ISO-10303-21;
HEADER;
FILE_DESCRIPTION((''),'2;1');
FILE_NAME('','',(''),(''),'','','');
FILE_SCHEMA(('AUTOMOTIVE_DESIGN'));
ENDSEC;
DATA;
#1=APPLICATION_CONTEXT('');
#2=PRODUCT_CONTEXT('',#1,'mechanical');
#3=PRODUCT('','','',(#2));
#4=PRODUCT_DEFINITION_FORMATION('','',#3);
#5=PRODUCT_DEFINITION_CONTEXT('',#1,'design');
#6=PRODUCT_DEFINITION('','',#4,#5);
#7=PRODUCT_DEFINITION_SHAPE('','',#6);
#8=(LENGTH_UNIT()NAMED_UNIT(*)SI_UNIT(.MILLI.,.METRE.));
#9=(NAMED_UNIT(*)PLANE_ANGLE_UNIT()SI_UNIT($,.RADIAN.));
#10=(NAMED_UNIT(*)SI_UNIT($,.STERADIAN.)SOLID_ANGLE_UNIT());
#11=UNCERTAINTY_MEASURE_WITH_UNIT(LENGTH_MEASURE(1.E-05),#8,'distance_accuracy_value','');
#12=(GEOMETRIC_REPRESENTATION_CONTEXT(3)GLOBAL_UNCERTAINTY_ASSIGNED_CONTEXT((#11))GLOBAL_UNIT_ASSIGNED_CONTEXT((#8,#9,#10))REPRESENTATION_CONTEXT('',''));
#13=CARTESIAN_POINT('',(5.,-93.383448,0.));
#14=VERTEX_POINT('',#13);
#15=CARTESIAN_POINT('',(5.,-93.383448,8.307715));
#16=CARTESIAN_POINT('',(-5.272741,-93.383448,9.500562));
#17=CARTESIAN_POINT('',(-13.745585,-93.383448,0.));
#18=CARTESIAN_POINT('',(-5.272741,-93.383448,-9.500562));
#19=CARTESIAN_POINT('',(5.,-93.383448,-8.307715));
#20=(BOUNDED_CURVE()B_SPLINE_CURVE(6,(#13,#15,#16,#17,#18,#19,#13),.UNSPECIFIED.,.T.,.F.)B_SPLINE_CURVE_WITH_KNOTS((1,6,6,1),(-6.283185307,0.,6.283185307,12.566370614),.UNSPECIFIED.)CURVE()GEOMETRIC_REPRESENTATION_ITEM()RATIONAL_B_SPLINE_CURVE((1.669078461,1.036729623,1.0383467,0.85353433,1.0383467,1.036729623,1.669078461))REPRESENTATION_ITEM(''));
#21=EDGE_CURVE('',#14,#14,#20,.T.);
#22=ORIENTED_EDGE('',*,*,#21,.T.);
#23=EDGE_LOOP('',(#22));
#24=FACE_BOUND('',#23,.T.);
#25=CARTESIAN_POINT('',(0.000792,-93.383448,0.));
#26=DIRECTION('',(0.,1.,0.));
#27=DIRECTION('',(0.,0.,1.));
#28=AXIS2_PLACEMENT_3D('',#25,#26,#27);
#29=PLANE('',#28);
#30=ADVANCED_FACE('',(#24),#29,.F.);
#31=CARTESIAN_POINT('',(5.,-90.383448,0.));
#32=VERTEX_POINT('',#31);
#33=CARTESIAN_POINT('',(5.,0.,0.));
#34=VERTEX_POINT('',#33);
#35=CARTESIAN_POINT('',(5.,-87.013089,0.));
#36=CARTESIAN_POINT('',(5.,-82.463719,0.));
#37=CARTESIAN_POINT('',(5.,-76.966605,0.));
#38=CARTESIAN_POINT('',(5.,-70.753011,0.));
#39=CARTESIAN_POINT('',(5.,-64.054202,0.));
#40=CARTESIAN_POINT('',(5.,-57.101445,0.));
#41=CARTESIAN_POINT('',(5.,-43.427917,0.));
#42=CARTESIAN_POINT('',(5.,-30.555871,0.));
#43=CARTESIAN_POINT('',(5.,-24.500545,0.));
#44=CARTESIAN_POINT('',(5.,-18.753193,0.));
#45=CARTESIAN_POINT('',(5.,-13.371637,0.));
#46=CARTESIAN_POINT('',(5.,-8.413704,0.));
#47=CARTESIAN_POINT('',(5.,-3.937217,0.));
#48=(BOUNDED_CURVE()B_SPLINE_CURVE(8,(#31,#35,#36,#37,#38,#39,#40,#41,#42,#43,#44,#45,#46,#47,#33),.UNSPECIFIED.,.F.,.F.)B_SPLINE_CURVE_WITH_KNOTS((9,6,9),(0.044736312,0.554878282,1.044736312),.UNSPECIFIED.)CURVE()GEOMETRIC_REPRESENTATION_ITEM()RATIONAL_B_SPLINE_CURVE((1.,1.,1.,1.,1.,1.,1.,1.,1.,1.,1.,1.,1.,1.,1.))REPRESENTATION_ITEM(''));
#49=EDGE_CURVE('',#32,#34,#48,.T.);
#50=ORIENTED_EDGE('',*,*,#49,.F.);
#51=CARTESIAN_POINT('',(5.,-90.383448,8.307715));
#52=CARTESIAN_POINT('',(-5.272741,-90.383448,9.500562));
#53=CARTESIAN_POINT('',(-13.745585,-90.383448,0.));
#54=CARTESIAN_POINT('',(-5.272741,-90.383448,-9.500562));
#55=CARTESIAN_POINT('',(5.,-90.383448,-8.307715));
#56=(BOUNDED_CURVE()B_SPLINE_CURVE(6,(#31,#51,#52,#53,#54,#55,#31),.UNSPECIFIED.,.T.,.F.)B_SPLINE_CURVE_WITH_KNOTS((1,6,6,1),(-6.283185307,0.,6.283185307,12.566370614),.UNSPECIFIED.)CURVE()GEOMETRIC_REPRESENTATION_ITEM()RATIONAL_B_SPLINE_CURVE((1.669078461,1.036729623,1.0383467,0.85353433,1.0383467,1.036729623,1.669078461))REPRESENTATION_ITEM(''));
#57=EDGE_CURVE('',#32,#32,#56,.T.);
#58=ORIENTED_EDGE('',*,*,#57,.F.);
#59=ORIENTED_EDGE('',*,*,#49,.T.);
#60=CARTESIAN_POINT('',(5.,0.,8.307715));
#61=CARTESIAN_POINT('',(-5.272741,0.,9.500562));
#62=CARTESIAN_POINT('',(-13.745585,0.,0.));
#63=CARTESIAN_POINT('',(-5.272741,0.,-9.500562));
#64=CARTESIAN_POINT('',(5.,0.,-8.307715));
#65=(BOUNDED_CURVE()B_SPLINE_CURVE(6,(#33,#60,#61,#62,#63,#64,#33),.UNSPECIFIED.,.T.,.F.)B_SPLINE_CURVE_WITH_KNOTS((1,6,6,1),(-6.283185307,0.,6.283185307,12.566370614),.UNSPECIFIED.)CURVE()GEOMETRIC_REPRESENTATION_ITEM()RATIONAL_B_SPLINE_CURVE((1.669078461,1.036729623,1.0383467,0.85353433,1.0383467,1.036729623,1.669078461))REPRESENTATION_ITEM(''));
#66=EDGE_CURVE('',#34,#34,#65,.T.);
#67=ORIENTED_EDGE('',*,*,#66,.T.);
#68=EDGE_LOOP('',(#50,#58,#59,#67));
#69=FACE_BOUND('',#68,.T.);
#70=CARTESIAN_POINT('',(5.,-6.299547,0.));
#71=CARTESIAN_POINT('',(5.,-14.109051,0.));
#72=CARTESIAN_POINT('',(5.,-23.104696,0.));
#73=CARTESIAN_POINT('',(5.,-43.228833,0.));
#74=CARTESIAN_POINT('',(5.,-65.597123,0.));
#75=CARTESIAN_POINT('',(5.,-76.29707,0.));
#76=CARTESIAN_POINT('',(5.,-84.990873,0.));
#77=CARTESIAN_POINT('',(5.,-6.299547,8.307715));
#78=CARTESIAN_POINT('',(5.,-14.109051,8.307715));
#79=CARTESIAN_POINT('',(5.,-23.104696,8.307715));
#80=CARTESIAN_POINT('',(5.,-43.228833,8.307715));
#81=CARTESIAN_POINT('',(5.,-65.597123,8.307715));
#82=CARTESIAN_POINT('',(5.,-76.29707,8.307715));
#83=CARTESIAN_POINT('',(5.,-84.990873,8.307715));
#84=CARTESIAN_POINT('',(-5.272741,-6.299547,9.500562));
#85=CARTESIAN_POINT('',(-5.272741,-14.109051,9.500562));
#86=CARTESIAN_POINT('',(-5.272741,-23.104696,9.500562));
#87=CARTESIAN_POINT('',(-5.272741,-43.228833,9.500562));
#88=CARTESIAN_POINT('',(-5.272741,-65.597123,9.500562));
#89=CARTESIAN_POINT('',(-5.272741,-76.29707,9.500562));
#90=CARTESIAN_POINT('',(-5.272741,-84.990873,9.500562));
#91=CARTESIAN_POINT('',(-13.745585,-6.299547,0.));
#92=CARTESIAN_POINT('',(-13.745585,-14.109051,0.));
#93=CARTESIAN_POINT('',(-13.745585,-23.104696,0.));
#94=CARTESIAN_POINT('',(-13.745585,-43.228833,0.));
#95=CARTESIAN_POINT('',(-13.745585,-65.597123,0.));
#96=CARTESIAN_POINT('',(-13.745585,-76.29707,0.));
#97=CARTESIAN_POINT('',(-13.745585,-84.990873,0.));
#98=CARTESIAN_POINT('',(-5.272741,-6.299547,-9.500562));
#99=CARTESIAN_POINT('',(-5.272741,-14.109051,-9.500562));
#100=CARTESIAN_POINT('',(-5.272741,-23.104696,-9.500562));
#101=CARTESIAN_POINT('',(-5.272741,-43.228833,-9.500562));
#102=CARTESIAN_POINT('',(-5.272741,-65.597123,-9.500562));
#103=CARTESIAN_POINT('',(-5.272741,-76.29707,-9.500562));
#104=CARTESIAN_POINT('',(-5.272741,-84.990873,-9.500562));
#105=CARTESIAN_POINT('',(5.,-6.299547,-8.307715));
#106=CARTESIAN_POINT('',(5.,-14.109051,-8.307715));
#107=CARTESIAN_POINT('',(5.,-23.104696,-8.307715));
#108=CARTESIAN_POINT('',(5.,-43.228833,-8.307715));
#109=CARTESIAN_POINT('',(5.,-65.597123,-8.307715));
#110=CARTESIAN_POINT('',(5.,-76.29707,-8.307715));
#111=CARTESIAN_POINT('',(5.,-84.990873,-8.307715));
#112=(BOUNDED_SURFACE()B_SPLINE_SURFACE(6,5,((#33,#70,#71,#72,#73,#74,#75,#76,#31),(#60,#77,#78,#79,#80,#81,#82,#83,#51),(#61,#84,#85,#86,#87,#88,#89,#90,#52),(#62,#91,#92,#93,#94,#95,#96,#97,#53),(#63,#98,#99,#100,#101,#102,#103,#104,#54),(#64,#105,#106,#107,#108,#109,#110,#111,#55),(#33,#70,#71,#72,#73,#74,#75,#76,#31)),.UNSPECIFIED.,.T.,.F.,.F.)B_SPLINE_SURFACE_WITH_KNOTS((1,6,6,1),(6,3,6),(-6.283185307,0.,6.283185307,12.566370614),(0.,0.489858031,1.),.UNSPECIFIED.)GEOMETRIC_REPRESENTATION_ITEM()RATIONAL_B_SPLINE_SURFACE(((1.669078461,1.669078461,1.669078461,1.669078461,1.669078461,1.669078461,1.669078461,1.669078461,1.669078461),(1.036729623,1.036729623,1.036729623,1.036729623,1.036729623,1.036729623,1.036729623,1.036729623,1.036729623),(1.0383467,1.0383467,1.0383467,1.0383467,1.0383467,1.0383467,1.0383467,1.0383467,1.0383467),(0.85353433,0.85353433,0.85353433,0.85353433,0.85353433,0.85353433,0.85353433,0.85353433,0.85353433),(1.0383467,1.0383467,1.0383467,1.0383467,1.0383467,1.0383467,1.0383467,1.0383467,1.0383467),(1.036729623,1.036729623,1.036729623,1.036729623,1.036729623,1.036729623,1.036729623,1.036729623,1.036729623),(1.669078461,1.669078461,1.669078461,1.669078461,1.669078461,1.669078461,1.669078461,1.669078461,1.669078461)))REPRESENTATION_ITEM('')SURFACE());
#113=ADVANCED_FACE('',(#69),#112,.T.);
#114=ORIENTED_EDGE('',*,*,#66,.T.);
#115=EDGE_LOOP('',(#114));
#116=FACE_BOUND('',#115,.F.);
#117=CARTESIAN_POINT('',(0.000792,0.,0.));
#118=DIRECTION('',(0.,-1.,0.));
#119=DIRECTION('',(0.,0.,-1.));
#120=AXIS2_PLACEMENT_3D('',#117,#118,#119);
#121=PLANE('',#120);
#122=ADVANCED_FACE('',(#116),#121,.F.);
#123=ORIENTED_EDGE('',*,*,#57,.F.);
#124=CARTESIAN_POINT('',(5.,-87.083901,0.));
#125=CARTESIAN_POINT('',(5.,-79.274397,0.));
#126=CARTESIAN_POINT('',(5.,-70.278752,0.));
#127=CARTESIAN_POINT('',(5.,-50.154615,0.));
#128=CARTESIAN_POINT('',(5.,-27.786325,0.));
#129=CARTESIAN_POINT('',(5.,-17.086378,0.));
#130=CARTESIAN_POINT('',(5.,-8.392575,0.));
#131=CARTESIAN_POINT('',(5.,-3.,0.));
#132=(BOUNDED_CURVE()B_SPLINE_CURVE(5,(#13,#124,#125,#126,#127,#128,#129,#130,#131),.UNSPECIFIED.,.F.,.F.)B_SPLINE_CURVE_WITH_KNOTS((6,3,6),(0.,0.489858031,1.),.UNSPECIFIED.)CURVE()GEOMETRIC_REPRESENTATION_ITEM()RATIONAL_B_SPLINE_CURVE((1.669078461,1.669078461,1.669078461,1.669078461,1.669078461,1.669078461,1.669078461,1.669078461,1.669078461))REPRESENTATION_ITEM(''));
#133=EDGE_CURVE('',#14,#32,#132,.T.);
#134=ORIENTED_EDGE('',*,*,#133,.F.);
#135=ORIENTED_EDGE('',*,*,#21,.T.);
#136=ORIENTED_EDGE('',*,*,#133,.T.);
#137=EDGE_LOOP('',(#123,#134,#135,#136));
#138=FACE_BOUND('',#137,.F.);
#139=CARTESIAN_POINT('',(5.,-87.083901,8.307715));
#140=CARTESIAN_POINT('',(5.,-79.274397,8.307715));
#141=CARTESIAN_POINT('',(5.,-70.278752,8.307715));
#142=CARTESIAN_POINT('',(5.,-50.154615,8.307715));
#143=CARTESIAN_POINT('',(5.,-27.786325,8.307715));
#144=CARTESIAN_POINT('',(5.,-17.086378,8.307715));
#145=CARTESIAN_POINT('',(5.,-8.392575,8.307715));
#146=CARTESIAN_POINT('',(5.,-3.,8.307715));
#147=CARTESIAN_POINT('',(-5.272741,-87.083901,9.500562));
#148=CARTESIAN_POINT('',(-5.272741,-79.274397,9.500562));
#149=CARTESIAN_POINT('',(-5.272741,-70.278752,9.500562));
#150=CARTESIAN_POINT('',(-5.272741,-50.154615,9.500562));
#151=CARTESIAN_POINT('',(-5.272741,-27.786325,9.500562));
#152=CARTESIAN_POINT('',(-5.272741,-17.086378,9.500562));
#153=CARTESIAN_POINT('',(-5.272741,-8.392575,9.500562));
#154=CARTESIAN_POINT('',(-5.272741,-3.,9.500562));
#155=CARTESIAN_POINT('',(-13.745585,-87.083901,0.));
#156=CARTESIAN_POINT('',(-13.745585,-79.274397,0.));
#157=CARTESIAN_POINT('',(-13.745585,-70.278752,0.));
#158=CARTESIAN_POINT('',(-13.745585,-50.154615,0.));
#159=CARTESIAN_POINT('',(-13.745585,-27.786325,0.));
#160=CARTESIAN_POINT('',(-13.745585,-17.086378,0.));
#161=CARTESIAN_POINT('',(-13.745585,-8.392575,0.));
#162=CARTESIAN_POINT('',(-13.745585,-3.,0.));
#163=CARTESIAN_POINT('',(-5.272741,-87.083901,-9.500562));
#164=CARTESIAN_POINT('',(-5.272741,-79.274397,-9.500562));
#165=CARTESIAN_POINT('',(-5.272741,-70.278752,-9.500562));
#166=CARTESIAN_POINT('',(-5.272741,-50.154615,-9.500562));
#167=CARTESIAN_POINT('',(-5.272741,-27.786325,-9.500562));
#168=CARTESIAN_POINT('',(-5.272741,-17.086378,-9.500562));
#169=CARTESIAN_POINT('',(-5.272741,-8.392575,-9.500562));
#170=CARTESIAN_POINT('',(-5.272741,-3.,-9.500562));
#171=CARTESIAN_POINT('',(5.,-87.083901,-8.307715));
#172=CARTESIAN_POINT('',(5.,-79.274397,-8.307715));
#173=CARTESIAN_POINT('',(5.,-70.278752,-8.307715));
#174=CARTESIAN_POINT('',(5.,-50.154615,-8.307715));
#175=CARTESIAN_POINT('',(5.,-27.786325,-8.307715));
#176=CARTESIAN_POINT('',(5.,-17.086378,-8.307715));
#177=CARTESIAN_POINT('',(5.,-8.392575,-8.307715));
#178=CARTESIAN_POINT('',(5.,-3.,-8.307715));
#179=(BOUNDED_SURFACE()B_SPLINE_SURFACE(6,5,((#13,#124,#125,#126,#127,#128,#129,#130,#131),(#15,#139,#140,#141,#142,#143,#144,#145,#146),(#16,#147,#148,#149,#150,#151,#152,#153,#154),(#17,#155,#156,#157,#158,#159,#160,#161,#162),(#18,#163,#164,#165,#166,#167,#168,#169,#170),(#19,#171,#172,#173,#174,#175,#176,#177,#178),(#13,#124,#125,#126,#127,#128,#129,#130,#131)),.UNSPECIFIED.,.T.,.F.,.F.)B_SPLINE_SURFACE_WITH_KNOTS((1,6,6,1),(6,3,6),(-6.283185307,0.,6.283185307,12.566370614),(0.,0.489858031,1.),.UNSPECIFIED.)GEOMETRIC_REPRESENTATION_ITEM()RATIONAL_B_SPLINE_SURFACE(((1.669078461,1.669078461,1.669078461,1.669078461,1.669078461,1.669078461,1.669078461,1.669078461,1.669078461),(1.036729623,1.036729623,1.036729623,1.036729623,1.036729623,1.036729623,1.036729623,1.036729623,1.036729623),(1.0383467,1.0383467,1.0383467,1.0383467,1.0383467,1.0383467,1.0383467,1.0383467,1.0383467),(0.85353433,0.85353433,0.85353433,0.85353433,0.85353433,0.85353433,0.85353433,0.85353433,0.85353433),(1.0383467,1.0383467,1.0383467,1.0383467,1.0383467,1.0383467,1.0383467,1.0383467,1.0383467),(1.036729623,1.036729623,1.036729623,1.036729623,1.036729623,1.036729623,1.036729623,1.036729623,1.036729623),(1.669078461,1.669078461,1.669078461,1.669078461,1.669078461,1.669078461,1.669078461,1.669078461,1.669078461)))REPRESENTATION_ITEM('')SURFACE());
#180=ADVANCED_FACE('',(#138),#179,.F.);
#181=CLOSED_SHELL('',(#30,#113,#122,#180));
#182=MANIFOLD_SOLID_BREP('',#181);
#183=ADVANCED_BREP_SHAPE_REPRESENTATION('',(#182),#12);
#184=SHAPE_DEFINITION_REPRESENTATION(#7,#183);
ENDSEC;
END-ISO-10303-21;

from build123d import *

# Parameters (mm, degrees)
F0_R = 5


# Not quite as in the source:
# - a feature of the source that left no trace in its solid (it failed there, or was rolled back) is left out
# - a pattern or mirror of a feature is missing from the dataset's text; its kind, count and spacing are read off the source's solid


with BuildPart() as f2:
    # F2: sweep along a path in F1
    with BuildLine(Plane.YZ) as f2_path:
        add(Plane.YZ * Edge.make_bspline(
            [(0, 0), (-10.4992447827, 0), (-42.2072799112, 0), (-81.3958233683, 0), (-90.3834476083, 0)],
            knots=[0, 0, 0, 0, 0.4898580308, 1, 1, 1, 1], degree=3))
    # F0 (on Front) → F2 (sweep)
    with BuildSketch(Plane.XZ):
        Circle(F0_R)
    sweep(path=f2_path.line)

    # F2_copies: F2 across plane


with BuildPart() as f2_1:
    add(f2.part)
    add(f2.part.mirror(Plane(origin=(0, -46.691724, 0), x_dir=(0, 0, -1), z_dir=(0, -1, 0))))


solid = f2_1.part
